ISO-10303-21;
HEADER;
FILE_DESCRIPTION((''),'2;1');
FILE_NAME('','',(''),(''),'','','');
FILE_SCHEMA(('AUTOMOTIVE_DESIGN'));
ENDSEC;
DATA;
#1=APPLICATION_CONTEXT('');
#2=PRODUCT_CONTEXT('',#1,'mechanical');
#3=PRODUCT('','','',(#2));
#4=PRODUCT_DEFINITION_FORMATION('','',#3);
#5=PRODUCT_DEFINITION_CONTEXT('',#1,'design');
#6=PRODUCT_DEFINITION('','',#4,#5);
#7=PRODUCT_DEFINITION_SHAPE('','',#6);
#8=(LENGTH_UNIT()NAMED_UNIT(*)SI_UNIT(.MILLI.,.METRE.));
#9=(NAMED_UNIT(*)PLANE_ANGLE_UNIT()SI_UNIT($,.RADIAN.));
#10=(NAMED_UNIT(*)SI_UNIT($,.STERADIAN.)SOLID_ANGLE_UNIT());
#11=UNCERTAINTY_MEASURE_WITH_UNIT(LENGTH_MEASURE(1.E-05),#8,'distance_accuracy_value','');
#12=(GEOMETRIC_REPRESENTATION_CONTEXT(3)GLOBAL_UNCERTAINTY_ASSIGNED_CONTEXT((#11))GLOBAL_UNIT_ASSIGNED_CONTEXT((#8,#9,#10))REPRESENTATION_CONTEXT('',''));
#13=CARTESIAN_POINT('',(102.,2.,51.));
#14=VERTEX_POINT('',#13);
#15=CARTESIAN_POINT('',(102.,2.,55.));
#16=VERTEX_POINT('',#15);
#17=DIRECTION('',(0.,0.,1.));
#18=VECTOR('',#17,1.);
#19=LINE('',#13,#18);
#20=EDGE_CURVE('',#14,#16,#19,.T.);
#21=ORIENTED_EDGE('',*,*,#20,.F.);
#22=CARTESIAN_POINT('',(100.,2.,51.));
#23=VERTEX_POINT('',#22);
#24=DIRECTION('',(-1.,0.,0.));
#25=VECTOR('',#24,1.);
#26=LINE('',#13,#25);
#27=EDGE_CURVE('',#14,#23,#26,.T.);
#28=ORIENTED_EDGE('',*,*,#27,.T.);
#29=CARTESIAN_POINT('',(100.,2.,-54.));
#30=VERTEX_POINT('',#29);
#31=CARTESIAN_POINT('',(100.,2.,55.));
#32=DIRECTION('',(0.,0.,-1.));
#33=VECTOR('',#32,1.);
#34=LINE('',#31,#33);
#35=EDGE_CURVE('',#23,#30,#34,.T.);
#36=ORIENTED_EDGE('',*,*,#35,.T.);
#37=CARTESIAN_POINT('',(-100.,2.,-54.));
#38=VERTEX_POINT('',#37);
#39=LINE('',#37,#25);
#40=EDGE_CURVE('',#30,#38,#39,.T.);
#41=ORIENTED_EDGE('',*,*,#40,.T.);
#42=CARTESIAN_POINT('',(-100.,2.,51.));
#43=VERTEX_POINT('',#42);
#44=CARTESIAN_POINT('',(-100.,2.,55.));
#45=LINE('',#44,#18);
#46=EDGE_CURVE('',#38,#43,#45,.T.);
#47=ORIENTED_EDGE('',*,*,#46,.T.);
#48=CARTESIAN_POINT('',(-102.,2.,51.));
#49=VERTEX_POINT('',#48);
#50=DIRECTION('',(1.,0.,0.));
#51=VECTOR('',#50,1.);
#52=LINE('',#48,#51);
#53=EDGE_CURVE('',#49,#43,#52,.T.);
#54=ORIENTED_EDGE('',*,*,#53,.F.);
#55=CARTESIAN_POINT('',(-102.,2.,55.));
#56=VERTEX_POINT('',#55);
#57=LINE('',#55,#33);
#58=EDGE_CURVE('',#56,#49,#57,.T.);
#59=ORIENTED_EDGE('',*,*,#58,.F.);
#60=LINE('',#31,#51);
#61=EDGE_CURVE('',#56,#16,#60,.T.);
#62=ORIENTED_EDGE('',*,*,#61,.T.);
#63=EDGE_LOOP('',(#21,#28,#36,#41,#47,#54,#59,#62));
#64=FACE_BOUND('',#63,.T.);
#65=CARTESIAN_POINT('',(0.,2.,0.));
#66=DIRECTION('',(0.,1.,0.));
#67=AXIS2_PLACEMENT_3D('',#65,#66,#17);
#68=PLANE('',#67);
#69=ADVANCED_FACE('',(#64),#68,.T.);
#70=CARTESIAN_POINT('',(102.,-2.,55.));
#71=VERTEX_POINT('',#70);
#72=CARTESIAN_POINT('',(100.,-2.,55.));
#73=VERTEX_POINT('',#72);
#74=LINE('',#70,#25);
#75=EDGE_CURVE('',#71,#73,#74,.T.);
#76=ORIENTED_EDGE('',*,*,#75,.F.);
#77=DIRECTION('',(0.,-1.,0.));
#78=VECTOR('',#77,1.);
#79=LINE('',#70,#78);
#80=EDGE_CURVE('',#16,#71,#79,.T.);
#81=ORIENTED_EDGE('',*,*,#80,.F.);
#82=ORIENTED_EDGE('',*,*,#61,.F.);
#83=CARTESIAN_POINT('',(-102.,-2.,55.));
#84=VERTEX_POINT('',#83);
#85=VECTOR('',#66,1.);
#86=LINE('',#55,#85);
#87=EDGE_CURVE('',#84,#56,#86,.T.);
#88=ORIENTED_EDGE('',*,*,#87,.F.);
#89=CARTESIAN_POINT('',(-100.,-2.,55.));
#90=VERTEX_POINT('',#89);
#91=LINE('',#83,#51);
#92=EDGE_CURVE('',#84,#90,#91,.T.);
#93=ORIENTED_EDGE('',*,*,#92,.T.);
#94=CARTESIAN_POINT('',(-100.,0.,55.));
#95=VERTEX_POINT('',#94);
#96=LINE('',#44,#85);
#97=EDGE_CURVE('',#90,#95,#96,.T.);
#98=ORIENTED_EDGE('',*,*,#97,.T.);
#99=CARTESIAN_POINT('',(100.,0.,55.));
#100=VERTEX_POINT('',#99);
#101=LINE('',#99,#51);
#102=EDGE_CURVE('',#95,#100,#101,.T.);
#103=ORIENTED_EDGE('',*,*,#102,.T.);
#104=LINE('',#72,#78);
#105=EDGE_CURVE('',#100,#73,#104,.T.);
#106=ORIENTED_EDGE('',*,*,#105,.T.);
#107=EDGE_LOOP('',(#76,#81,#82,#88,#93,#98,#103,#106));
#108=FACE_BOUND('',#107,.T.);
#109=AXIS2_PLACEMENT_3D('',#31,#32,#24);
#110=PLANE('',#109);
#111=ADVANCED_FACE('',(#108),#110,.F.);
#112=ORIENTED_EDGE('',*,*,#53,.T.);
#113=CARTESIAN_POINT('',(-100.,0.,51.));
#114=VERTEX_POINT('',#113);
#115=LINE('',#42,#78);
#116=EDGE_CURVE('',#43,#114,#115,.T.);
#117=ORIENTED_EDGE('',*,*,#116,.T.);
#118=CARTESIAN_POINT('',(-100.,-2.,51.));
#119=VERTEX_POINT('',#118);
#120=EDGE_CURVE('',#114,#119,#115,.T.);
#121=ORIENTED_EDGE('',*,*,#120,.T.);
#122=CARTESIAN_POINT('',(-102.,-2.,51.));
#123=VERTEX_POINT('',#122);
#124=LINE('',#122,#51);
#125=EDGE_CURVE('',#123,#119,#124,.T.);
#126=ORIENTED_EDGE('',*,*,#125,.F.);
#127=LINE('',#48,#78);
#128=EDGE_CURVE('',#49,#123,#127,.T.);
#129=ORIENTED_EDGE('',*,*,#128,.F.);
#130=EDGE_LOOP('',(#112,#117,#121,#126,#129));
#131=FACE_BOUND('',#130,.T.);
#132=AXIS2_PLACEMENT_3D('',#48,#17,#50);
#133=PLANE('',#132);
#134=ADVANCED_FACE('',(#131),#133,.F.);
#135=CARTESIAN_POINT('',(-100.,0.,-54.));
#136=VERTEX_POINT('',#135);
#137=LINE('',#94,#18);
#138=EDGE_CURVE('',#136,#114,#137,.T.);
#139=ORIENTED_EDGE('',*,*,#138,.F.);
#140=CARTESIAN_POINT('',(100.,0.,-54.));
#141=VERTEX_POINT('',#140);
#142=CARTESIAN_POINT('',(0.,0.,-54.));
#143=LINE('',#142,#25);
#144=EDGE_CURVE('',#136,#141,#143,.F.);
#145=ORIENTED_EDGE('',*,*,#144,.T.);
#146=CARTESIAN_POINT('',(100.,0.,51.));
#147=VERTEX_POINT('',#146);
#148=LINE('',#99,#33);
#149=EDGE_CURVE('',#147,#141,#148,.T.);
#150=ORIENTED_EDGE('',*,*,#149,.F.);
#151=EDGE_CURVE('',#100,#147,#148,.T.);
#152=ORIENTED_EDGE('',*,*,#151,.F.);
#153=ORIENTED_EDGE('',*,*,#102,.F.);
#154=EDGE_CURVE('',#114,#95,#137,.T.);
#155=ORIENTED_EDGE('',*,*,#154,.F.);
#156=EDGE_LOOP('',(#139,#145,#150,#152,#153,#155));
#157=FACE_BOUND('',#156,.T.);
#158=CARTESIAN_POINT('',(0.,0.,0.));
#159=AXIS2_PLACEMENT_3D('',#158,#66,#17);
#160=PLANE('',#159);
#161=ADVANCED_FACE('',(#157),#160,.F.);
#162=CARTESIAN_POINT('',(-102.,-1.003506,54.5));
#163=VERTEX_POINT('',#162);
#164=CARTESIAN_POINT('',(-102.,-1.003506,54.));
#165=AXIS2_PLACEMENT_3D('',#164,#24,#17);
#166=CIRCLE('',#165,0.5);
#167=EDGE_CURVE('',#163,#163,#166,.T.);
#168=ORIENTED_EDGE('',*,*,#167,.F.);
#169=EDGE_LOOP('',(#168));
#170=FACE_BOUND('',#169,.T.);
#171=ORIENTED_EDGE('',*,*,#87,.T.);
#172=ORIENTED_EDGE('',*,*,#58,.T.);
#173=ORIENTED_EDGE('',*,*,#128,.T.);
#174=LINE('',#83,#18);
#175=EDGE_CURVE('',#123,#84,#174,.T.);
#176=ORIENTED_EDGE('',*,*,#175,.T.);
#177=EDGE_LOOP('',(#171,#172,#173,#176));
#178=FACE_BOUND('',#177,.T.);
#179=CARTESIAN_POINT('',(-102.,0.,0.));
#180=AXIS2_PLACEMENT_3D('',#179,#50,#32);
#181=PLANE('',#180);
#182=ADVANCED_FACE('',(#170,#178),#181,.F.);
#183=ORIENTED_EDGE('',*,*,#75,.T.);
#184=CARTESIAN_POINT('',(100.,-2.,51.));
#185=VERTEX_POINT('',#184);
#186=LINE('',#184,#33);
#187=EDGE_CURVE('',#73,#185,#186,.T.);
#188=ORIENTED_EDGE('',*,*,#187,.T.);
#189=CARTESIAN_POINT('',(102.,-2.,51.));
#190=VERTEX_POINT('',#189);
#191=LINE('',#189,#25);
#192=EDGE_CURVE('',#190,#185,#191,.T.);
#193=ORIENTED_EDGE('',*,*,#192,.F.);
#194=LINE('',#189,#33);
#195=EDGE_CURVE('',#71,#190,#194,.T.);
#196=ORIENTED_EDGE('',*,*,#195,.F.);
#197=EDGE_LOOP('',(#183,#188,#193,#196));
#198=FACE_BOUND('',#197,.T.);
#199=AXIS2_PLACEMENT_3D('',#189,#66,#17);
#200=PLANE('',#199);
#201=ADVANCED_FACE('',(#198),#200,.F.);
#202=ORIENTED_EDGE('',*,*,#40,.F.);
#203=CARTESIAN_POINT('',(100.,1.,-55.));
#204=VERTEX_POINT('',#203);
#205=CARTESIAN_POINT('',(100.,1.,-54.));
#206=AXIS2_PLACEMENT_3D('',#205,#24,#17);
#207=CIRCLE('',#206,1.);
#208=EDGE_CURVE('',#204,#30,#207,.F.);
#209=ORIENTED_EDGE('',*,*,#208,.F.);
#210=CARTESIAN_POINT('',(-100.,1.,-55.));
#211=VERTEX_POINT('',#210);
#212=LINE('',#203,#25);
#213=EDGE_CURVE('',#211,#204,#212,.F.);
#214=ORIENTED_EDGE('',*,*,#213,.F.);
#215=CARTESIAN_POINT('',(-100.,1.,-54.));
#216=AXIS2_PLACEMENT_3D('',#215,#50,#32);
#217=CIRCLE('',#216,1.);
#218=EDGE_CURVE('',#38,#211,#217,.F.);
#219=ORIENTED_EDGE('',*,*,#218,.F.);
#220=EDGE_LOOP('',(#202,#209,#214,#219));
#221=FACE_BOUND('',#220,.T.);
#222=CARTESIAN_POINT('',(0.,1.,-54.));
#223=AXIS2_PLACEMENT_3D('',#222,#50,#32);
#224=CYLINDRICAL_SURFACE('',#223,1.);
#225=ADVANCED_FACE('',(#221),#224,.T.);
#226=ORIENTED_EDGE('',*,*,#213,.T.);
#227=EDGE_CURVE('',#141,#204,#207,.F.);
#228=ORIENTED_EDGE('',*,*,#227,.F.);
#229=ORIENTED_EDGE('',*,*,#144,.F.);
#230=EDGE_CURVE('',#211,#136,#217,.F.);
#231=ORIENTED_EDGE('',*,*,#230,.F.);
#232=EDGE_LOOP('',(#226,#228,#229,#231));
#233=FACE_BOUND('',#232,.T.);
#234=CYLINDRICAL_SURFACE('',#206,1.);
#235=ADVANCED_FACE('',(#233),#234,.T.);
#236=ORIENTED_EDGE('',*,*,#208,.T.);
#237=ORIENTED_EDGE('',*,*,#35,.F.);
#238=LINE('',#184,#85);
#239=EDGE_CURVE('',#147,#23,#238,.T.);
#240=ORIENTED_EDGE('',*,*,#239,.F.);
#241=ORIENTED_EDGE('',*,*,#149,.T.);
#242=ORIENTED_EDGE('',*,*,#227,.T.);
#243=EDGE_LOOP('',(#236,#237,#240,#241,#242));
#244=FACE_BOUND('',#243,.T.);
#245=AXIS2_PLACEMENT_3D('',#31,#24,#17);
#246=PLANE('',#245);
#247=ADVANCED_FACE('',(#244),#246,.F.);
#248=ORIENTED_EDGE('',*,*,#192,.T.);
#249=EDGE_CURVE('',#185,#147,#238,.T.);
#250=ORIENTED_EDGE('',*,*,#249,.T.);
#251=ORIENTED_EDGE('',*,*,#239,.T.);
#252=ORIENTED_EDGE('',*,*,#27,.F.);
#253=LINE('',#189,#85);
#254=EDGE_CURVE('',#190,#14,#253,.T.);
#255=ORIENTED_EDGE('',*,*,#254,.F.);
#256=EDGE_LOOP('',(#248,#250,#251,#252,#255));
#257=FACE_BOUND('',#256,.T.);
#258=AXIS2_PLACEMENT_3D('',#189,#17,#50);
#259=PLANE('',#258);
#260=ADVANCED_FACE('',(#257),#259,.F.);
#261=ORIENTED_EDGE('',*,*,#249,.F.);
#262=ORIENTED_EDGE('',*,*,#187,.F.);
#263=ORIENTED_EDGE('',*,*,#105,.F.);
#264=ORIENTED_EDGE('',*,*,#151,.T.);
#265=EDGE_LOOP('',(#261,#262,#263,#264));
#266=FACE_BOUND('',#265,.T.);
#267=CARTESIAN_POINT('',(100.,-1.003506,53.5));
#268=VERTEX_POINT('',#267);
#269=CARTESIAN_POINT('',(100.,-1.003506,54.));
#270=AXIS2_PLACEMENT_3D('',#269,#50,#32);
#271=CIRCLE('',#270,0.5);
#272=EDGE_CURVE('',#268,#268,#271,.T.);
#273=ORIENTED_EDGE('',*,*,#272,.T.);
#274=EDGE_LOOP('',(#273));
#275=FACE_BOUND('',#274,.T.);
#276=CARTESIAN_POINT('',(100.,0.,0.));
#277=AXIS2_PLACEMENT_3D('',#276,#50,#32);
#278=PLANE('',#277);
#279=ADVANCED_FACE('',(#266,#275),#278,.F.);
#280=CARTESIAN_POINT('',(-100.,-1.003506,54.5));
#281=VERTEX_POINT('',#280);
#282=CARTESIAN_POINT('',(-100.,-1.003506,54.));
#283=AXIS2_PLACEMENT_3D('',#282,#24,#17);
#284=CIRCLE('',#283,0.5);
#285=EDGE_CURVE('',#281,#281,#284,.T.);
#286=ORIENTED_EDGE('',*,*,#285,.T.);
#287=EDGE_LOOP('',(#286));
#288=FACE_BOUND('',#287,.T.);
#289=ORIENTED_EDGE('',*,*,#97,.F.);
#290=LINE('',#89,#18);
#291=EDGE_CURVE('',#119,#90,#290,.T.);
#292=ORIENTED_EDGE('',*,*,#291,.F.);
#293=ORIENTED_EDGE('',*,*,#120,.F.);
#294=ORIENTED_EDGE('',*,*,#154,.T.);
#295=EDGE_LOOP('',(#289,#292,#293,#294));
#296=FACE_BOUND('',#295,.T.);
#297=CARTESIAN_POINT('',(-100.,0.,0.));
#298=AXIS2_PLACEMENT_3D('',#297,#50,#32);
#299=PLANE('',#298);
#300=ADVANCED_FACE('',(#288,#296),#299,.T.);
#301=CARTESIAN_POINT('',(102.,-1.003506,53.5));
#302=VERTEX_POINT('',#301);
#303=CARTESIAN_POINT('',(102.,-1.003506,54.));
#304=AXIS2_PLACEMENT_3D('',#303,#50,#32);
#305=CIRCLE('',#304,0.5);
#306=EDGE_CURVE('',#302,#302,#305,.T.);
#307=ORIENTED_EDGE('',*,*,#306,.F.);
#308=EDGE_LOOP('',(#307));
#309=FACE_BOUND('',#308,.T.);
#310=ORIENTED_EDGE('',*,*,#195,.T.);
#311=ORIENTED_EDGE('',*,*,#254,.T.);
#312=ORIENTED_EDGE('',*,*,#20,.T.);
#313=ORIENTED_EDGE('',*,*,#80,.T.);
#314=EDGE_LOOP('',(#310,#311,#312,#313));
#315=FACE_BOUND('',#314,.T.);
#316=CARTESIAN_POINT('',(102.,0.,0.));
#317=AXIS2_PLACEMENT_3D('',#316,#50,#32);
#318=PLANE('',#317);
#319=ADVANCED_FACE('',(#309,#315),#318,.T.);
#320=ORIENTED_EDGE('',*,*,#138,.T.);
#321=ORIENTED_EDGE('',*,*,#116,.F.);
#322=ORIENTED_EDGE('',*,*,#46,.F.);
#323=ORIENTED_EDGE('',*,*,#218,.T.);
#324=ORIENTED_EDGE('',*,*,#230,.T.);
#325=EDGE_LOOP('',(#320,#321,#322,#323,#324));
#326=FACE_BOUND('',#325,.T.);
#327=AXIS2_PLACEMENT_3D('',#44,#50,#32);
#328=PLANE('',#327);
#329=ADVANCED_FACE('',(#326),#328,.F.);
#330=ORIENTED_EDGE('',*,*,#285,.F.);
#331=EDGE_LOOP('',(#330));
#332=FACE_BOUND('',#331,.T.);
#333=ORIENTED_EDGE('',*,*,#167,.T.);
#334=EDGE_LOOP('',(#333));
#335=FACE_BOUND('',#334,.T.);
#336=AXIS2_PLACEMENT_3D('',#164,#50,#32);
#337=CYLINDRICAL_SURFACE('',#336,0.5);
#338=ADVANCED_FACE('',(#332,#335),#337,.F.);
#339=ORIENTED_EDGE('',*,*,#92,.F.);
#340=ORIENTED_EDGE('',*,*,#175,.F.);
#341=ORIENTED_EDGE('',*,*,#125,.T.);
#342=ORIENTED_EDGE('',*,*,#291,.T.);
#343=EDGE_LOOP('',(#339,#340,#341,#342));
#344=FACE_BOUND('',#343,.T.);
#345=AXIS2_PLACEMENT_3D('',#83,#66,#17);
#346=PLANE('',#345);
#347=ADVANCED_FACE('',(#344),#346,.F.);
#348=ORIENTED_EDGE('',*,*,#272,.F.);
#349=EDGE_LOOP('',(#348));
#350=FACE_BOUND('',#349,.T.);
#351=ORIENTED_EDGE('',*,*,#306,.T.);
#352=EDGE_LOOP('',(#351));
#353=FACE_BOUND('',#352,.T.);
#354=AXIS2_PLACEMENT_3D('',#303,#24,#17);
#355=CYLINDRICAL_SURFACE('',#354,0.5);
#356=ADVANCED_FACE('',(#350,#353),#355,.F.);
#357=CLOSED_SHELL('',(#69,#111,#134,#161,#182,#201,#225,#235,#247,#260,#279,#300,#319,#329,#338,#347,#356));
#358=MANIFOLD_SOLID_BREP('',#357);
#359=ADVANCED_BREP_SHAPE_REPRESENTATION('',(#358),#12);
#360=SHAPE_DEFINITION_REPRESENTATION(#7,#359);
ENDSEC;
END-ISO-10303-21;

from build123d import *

# Parameters (mm, degrees)
SKETCH1_W           = 200
SKETCH1_H           = 110
BOSS_EXTRUDE1_DEPTH = 2
FILLET1_R           = 1
SKETCH3_W           = 4
SKETCH3_H           = 4
SKETCH3_R           = 0.5
BOSS_EXTRUDE2_DEPTH = 2
BOSS_EXTRUDE3_START = 2
SKETCH4_W           = 4
SKETCH4_H           = 4
SKETCH4_R           = 0.5
BOSS_EXTRUDE3_DEPTH = 2


with BuildPart() as part:
    # Sketch1 → Boss-Extrude1 (new body)
    with BuildSketch(Plane(origin=(0, 0, 0), x_dir=(1, 0, 0), z_dir=(0, 1, 0))):
        Rectangle(SKETCH1_W, SKETCH1_H)
    extrude(amount=BOSS_EXTRUDE1_DEPTH)

    # Fillet1
    fillet1_edges = [part.edges().sort_by_distance(p)[0] for p in [
        (0, 0, -55),
        (0, 2, -55),
    ]]
    fillet(fillet1_edges, radius=FILLET1_R - 0.0001)  # a hair under: the kernel refuses the full size

    # Sketch3 → Boss-Extrude2 (add)
    with BuildSketch(Plane.ZY.offset(100)):
        with Locations((53, 0)):
            Rectangle(SKETCH3_W, SKETCH3_H)
        with Locations((54, -1.003505598)):
            Circle(SKETCH3_R, mode=Mode.SUBTRACT)
    extrude(amount=BOSS_EXTRUDE2_DEPTH)

    # Sketch4 → Boss-Extrude3 (add)
    with BuildSketch(Plane(origin=(100, 0, 0), x_dir=(0, 0, -1), z_dir=(1, 0, 0)).offset(BOSS_EXTRUDE3_START)):
        with Locations((-53, 0)):
            Rectangle(SKETCH4_W, SKETCH4_H)
        with Locations(Location((-54, -1.003505598, 0), (0, 0, 180))):
            Circle(SKETCH4_R, mode=Mode.SUBTRACT)
    extrude(amount=-BOSS_EXTRUDE3_DEPTH)


solid = part.part
